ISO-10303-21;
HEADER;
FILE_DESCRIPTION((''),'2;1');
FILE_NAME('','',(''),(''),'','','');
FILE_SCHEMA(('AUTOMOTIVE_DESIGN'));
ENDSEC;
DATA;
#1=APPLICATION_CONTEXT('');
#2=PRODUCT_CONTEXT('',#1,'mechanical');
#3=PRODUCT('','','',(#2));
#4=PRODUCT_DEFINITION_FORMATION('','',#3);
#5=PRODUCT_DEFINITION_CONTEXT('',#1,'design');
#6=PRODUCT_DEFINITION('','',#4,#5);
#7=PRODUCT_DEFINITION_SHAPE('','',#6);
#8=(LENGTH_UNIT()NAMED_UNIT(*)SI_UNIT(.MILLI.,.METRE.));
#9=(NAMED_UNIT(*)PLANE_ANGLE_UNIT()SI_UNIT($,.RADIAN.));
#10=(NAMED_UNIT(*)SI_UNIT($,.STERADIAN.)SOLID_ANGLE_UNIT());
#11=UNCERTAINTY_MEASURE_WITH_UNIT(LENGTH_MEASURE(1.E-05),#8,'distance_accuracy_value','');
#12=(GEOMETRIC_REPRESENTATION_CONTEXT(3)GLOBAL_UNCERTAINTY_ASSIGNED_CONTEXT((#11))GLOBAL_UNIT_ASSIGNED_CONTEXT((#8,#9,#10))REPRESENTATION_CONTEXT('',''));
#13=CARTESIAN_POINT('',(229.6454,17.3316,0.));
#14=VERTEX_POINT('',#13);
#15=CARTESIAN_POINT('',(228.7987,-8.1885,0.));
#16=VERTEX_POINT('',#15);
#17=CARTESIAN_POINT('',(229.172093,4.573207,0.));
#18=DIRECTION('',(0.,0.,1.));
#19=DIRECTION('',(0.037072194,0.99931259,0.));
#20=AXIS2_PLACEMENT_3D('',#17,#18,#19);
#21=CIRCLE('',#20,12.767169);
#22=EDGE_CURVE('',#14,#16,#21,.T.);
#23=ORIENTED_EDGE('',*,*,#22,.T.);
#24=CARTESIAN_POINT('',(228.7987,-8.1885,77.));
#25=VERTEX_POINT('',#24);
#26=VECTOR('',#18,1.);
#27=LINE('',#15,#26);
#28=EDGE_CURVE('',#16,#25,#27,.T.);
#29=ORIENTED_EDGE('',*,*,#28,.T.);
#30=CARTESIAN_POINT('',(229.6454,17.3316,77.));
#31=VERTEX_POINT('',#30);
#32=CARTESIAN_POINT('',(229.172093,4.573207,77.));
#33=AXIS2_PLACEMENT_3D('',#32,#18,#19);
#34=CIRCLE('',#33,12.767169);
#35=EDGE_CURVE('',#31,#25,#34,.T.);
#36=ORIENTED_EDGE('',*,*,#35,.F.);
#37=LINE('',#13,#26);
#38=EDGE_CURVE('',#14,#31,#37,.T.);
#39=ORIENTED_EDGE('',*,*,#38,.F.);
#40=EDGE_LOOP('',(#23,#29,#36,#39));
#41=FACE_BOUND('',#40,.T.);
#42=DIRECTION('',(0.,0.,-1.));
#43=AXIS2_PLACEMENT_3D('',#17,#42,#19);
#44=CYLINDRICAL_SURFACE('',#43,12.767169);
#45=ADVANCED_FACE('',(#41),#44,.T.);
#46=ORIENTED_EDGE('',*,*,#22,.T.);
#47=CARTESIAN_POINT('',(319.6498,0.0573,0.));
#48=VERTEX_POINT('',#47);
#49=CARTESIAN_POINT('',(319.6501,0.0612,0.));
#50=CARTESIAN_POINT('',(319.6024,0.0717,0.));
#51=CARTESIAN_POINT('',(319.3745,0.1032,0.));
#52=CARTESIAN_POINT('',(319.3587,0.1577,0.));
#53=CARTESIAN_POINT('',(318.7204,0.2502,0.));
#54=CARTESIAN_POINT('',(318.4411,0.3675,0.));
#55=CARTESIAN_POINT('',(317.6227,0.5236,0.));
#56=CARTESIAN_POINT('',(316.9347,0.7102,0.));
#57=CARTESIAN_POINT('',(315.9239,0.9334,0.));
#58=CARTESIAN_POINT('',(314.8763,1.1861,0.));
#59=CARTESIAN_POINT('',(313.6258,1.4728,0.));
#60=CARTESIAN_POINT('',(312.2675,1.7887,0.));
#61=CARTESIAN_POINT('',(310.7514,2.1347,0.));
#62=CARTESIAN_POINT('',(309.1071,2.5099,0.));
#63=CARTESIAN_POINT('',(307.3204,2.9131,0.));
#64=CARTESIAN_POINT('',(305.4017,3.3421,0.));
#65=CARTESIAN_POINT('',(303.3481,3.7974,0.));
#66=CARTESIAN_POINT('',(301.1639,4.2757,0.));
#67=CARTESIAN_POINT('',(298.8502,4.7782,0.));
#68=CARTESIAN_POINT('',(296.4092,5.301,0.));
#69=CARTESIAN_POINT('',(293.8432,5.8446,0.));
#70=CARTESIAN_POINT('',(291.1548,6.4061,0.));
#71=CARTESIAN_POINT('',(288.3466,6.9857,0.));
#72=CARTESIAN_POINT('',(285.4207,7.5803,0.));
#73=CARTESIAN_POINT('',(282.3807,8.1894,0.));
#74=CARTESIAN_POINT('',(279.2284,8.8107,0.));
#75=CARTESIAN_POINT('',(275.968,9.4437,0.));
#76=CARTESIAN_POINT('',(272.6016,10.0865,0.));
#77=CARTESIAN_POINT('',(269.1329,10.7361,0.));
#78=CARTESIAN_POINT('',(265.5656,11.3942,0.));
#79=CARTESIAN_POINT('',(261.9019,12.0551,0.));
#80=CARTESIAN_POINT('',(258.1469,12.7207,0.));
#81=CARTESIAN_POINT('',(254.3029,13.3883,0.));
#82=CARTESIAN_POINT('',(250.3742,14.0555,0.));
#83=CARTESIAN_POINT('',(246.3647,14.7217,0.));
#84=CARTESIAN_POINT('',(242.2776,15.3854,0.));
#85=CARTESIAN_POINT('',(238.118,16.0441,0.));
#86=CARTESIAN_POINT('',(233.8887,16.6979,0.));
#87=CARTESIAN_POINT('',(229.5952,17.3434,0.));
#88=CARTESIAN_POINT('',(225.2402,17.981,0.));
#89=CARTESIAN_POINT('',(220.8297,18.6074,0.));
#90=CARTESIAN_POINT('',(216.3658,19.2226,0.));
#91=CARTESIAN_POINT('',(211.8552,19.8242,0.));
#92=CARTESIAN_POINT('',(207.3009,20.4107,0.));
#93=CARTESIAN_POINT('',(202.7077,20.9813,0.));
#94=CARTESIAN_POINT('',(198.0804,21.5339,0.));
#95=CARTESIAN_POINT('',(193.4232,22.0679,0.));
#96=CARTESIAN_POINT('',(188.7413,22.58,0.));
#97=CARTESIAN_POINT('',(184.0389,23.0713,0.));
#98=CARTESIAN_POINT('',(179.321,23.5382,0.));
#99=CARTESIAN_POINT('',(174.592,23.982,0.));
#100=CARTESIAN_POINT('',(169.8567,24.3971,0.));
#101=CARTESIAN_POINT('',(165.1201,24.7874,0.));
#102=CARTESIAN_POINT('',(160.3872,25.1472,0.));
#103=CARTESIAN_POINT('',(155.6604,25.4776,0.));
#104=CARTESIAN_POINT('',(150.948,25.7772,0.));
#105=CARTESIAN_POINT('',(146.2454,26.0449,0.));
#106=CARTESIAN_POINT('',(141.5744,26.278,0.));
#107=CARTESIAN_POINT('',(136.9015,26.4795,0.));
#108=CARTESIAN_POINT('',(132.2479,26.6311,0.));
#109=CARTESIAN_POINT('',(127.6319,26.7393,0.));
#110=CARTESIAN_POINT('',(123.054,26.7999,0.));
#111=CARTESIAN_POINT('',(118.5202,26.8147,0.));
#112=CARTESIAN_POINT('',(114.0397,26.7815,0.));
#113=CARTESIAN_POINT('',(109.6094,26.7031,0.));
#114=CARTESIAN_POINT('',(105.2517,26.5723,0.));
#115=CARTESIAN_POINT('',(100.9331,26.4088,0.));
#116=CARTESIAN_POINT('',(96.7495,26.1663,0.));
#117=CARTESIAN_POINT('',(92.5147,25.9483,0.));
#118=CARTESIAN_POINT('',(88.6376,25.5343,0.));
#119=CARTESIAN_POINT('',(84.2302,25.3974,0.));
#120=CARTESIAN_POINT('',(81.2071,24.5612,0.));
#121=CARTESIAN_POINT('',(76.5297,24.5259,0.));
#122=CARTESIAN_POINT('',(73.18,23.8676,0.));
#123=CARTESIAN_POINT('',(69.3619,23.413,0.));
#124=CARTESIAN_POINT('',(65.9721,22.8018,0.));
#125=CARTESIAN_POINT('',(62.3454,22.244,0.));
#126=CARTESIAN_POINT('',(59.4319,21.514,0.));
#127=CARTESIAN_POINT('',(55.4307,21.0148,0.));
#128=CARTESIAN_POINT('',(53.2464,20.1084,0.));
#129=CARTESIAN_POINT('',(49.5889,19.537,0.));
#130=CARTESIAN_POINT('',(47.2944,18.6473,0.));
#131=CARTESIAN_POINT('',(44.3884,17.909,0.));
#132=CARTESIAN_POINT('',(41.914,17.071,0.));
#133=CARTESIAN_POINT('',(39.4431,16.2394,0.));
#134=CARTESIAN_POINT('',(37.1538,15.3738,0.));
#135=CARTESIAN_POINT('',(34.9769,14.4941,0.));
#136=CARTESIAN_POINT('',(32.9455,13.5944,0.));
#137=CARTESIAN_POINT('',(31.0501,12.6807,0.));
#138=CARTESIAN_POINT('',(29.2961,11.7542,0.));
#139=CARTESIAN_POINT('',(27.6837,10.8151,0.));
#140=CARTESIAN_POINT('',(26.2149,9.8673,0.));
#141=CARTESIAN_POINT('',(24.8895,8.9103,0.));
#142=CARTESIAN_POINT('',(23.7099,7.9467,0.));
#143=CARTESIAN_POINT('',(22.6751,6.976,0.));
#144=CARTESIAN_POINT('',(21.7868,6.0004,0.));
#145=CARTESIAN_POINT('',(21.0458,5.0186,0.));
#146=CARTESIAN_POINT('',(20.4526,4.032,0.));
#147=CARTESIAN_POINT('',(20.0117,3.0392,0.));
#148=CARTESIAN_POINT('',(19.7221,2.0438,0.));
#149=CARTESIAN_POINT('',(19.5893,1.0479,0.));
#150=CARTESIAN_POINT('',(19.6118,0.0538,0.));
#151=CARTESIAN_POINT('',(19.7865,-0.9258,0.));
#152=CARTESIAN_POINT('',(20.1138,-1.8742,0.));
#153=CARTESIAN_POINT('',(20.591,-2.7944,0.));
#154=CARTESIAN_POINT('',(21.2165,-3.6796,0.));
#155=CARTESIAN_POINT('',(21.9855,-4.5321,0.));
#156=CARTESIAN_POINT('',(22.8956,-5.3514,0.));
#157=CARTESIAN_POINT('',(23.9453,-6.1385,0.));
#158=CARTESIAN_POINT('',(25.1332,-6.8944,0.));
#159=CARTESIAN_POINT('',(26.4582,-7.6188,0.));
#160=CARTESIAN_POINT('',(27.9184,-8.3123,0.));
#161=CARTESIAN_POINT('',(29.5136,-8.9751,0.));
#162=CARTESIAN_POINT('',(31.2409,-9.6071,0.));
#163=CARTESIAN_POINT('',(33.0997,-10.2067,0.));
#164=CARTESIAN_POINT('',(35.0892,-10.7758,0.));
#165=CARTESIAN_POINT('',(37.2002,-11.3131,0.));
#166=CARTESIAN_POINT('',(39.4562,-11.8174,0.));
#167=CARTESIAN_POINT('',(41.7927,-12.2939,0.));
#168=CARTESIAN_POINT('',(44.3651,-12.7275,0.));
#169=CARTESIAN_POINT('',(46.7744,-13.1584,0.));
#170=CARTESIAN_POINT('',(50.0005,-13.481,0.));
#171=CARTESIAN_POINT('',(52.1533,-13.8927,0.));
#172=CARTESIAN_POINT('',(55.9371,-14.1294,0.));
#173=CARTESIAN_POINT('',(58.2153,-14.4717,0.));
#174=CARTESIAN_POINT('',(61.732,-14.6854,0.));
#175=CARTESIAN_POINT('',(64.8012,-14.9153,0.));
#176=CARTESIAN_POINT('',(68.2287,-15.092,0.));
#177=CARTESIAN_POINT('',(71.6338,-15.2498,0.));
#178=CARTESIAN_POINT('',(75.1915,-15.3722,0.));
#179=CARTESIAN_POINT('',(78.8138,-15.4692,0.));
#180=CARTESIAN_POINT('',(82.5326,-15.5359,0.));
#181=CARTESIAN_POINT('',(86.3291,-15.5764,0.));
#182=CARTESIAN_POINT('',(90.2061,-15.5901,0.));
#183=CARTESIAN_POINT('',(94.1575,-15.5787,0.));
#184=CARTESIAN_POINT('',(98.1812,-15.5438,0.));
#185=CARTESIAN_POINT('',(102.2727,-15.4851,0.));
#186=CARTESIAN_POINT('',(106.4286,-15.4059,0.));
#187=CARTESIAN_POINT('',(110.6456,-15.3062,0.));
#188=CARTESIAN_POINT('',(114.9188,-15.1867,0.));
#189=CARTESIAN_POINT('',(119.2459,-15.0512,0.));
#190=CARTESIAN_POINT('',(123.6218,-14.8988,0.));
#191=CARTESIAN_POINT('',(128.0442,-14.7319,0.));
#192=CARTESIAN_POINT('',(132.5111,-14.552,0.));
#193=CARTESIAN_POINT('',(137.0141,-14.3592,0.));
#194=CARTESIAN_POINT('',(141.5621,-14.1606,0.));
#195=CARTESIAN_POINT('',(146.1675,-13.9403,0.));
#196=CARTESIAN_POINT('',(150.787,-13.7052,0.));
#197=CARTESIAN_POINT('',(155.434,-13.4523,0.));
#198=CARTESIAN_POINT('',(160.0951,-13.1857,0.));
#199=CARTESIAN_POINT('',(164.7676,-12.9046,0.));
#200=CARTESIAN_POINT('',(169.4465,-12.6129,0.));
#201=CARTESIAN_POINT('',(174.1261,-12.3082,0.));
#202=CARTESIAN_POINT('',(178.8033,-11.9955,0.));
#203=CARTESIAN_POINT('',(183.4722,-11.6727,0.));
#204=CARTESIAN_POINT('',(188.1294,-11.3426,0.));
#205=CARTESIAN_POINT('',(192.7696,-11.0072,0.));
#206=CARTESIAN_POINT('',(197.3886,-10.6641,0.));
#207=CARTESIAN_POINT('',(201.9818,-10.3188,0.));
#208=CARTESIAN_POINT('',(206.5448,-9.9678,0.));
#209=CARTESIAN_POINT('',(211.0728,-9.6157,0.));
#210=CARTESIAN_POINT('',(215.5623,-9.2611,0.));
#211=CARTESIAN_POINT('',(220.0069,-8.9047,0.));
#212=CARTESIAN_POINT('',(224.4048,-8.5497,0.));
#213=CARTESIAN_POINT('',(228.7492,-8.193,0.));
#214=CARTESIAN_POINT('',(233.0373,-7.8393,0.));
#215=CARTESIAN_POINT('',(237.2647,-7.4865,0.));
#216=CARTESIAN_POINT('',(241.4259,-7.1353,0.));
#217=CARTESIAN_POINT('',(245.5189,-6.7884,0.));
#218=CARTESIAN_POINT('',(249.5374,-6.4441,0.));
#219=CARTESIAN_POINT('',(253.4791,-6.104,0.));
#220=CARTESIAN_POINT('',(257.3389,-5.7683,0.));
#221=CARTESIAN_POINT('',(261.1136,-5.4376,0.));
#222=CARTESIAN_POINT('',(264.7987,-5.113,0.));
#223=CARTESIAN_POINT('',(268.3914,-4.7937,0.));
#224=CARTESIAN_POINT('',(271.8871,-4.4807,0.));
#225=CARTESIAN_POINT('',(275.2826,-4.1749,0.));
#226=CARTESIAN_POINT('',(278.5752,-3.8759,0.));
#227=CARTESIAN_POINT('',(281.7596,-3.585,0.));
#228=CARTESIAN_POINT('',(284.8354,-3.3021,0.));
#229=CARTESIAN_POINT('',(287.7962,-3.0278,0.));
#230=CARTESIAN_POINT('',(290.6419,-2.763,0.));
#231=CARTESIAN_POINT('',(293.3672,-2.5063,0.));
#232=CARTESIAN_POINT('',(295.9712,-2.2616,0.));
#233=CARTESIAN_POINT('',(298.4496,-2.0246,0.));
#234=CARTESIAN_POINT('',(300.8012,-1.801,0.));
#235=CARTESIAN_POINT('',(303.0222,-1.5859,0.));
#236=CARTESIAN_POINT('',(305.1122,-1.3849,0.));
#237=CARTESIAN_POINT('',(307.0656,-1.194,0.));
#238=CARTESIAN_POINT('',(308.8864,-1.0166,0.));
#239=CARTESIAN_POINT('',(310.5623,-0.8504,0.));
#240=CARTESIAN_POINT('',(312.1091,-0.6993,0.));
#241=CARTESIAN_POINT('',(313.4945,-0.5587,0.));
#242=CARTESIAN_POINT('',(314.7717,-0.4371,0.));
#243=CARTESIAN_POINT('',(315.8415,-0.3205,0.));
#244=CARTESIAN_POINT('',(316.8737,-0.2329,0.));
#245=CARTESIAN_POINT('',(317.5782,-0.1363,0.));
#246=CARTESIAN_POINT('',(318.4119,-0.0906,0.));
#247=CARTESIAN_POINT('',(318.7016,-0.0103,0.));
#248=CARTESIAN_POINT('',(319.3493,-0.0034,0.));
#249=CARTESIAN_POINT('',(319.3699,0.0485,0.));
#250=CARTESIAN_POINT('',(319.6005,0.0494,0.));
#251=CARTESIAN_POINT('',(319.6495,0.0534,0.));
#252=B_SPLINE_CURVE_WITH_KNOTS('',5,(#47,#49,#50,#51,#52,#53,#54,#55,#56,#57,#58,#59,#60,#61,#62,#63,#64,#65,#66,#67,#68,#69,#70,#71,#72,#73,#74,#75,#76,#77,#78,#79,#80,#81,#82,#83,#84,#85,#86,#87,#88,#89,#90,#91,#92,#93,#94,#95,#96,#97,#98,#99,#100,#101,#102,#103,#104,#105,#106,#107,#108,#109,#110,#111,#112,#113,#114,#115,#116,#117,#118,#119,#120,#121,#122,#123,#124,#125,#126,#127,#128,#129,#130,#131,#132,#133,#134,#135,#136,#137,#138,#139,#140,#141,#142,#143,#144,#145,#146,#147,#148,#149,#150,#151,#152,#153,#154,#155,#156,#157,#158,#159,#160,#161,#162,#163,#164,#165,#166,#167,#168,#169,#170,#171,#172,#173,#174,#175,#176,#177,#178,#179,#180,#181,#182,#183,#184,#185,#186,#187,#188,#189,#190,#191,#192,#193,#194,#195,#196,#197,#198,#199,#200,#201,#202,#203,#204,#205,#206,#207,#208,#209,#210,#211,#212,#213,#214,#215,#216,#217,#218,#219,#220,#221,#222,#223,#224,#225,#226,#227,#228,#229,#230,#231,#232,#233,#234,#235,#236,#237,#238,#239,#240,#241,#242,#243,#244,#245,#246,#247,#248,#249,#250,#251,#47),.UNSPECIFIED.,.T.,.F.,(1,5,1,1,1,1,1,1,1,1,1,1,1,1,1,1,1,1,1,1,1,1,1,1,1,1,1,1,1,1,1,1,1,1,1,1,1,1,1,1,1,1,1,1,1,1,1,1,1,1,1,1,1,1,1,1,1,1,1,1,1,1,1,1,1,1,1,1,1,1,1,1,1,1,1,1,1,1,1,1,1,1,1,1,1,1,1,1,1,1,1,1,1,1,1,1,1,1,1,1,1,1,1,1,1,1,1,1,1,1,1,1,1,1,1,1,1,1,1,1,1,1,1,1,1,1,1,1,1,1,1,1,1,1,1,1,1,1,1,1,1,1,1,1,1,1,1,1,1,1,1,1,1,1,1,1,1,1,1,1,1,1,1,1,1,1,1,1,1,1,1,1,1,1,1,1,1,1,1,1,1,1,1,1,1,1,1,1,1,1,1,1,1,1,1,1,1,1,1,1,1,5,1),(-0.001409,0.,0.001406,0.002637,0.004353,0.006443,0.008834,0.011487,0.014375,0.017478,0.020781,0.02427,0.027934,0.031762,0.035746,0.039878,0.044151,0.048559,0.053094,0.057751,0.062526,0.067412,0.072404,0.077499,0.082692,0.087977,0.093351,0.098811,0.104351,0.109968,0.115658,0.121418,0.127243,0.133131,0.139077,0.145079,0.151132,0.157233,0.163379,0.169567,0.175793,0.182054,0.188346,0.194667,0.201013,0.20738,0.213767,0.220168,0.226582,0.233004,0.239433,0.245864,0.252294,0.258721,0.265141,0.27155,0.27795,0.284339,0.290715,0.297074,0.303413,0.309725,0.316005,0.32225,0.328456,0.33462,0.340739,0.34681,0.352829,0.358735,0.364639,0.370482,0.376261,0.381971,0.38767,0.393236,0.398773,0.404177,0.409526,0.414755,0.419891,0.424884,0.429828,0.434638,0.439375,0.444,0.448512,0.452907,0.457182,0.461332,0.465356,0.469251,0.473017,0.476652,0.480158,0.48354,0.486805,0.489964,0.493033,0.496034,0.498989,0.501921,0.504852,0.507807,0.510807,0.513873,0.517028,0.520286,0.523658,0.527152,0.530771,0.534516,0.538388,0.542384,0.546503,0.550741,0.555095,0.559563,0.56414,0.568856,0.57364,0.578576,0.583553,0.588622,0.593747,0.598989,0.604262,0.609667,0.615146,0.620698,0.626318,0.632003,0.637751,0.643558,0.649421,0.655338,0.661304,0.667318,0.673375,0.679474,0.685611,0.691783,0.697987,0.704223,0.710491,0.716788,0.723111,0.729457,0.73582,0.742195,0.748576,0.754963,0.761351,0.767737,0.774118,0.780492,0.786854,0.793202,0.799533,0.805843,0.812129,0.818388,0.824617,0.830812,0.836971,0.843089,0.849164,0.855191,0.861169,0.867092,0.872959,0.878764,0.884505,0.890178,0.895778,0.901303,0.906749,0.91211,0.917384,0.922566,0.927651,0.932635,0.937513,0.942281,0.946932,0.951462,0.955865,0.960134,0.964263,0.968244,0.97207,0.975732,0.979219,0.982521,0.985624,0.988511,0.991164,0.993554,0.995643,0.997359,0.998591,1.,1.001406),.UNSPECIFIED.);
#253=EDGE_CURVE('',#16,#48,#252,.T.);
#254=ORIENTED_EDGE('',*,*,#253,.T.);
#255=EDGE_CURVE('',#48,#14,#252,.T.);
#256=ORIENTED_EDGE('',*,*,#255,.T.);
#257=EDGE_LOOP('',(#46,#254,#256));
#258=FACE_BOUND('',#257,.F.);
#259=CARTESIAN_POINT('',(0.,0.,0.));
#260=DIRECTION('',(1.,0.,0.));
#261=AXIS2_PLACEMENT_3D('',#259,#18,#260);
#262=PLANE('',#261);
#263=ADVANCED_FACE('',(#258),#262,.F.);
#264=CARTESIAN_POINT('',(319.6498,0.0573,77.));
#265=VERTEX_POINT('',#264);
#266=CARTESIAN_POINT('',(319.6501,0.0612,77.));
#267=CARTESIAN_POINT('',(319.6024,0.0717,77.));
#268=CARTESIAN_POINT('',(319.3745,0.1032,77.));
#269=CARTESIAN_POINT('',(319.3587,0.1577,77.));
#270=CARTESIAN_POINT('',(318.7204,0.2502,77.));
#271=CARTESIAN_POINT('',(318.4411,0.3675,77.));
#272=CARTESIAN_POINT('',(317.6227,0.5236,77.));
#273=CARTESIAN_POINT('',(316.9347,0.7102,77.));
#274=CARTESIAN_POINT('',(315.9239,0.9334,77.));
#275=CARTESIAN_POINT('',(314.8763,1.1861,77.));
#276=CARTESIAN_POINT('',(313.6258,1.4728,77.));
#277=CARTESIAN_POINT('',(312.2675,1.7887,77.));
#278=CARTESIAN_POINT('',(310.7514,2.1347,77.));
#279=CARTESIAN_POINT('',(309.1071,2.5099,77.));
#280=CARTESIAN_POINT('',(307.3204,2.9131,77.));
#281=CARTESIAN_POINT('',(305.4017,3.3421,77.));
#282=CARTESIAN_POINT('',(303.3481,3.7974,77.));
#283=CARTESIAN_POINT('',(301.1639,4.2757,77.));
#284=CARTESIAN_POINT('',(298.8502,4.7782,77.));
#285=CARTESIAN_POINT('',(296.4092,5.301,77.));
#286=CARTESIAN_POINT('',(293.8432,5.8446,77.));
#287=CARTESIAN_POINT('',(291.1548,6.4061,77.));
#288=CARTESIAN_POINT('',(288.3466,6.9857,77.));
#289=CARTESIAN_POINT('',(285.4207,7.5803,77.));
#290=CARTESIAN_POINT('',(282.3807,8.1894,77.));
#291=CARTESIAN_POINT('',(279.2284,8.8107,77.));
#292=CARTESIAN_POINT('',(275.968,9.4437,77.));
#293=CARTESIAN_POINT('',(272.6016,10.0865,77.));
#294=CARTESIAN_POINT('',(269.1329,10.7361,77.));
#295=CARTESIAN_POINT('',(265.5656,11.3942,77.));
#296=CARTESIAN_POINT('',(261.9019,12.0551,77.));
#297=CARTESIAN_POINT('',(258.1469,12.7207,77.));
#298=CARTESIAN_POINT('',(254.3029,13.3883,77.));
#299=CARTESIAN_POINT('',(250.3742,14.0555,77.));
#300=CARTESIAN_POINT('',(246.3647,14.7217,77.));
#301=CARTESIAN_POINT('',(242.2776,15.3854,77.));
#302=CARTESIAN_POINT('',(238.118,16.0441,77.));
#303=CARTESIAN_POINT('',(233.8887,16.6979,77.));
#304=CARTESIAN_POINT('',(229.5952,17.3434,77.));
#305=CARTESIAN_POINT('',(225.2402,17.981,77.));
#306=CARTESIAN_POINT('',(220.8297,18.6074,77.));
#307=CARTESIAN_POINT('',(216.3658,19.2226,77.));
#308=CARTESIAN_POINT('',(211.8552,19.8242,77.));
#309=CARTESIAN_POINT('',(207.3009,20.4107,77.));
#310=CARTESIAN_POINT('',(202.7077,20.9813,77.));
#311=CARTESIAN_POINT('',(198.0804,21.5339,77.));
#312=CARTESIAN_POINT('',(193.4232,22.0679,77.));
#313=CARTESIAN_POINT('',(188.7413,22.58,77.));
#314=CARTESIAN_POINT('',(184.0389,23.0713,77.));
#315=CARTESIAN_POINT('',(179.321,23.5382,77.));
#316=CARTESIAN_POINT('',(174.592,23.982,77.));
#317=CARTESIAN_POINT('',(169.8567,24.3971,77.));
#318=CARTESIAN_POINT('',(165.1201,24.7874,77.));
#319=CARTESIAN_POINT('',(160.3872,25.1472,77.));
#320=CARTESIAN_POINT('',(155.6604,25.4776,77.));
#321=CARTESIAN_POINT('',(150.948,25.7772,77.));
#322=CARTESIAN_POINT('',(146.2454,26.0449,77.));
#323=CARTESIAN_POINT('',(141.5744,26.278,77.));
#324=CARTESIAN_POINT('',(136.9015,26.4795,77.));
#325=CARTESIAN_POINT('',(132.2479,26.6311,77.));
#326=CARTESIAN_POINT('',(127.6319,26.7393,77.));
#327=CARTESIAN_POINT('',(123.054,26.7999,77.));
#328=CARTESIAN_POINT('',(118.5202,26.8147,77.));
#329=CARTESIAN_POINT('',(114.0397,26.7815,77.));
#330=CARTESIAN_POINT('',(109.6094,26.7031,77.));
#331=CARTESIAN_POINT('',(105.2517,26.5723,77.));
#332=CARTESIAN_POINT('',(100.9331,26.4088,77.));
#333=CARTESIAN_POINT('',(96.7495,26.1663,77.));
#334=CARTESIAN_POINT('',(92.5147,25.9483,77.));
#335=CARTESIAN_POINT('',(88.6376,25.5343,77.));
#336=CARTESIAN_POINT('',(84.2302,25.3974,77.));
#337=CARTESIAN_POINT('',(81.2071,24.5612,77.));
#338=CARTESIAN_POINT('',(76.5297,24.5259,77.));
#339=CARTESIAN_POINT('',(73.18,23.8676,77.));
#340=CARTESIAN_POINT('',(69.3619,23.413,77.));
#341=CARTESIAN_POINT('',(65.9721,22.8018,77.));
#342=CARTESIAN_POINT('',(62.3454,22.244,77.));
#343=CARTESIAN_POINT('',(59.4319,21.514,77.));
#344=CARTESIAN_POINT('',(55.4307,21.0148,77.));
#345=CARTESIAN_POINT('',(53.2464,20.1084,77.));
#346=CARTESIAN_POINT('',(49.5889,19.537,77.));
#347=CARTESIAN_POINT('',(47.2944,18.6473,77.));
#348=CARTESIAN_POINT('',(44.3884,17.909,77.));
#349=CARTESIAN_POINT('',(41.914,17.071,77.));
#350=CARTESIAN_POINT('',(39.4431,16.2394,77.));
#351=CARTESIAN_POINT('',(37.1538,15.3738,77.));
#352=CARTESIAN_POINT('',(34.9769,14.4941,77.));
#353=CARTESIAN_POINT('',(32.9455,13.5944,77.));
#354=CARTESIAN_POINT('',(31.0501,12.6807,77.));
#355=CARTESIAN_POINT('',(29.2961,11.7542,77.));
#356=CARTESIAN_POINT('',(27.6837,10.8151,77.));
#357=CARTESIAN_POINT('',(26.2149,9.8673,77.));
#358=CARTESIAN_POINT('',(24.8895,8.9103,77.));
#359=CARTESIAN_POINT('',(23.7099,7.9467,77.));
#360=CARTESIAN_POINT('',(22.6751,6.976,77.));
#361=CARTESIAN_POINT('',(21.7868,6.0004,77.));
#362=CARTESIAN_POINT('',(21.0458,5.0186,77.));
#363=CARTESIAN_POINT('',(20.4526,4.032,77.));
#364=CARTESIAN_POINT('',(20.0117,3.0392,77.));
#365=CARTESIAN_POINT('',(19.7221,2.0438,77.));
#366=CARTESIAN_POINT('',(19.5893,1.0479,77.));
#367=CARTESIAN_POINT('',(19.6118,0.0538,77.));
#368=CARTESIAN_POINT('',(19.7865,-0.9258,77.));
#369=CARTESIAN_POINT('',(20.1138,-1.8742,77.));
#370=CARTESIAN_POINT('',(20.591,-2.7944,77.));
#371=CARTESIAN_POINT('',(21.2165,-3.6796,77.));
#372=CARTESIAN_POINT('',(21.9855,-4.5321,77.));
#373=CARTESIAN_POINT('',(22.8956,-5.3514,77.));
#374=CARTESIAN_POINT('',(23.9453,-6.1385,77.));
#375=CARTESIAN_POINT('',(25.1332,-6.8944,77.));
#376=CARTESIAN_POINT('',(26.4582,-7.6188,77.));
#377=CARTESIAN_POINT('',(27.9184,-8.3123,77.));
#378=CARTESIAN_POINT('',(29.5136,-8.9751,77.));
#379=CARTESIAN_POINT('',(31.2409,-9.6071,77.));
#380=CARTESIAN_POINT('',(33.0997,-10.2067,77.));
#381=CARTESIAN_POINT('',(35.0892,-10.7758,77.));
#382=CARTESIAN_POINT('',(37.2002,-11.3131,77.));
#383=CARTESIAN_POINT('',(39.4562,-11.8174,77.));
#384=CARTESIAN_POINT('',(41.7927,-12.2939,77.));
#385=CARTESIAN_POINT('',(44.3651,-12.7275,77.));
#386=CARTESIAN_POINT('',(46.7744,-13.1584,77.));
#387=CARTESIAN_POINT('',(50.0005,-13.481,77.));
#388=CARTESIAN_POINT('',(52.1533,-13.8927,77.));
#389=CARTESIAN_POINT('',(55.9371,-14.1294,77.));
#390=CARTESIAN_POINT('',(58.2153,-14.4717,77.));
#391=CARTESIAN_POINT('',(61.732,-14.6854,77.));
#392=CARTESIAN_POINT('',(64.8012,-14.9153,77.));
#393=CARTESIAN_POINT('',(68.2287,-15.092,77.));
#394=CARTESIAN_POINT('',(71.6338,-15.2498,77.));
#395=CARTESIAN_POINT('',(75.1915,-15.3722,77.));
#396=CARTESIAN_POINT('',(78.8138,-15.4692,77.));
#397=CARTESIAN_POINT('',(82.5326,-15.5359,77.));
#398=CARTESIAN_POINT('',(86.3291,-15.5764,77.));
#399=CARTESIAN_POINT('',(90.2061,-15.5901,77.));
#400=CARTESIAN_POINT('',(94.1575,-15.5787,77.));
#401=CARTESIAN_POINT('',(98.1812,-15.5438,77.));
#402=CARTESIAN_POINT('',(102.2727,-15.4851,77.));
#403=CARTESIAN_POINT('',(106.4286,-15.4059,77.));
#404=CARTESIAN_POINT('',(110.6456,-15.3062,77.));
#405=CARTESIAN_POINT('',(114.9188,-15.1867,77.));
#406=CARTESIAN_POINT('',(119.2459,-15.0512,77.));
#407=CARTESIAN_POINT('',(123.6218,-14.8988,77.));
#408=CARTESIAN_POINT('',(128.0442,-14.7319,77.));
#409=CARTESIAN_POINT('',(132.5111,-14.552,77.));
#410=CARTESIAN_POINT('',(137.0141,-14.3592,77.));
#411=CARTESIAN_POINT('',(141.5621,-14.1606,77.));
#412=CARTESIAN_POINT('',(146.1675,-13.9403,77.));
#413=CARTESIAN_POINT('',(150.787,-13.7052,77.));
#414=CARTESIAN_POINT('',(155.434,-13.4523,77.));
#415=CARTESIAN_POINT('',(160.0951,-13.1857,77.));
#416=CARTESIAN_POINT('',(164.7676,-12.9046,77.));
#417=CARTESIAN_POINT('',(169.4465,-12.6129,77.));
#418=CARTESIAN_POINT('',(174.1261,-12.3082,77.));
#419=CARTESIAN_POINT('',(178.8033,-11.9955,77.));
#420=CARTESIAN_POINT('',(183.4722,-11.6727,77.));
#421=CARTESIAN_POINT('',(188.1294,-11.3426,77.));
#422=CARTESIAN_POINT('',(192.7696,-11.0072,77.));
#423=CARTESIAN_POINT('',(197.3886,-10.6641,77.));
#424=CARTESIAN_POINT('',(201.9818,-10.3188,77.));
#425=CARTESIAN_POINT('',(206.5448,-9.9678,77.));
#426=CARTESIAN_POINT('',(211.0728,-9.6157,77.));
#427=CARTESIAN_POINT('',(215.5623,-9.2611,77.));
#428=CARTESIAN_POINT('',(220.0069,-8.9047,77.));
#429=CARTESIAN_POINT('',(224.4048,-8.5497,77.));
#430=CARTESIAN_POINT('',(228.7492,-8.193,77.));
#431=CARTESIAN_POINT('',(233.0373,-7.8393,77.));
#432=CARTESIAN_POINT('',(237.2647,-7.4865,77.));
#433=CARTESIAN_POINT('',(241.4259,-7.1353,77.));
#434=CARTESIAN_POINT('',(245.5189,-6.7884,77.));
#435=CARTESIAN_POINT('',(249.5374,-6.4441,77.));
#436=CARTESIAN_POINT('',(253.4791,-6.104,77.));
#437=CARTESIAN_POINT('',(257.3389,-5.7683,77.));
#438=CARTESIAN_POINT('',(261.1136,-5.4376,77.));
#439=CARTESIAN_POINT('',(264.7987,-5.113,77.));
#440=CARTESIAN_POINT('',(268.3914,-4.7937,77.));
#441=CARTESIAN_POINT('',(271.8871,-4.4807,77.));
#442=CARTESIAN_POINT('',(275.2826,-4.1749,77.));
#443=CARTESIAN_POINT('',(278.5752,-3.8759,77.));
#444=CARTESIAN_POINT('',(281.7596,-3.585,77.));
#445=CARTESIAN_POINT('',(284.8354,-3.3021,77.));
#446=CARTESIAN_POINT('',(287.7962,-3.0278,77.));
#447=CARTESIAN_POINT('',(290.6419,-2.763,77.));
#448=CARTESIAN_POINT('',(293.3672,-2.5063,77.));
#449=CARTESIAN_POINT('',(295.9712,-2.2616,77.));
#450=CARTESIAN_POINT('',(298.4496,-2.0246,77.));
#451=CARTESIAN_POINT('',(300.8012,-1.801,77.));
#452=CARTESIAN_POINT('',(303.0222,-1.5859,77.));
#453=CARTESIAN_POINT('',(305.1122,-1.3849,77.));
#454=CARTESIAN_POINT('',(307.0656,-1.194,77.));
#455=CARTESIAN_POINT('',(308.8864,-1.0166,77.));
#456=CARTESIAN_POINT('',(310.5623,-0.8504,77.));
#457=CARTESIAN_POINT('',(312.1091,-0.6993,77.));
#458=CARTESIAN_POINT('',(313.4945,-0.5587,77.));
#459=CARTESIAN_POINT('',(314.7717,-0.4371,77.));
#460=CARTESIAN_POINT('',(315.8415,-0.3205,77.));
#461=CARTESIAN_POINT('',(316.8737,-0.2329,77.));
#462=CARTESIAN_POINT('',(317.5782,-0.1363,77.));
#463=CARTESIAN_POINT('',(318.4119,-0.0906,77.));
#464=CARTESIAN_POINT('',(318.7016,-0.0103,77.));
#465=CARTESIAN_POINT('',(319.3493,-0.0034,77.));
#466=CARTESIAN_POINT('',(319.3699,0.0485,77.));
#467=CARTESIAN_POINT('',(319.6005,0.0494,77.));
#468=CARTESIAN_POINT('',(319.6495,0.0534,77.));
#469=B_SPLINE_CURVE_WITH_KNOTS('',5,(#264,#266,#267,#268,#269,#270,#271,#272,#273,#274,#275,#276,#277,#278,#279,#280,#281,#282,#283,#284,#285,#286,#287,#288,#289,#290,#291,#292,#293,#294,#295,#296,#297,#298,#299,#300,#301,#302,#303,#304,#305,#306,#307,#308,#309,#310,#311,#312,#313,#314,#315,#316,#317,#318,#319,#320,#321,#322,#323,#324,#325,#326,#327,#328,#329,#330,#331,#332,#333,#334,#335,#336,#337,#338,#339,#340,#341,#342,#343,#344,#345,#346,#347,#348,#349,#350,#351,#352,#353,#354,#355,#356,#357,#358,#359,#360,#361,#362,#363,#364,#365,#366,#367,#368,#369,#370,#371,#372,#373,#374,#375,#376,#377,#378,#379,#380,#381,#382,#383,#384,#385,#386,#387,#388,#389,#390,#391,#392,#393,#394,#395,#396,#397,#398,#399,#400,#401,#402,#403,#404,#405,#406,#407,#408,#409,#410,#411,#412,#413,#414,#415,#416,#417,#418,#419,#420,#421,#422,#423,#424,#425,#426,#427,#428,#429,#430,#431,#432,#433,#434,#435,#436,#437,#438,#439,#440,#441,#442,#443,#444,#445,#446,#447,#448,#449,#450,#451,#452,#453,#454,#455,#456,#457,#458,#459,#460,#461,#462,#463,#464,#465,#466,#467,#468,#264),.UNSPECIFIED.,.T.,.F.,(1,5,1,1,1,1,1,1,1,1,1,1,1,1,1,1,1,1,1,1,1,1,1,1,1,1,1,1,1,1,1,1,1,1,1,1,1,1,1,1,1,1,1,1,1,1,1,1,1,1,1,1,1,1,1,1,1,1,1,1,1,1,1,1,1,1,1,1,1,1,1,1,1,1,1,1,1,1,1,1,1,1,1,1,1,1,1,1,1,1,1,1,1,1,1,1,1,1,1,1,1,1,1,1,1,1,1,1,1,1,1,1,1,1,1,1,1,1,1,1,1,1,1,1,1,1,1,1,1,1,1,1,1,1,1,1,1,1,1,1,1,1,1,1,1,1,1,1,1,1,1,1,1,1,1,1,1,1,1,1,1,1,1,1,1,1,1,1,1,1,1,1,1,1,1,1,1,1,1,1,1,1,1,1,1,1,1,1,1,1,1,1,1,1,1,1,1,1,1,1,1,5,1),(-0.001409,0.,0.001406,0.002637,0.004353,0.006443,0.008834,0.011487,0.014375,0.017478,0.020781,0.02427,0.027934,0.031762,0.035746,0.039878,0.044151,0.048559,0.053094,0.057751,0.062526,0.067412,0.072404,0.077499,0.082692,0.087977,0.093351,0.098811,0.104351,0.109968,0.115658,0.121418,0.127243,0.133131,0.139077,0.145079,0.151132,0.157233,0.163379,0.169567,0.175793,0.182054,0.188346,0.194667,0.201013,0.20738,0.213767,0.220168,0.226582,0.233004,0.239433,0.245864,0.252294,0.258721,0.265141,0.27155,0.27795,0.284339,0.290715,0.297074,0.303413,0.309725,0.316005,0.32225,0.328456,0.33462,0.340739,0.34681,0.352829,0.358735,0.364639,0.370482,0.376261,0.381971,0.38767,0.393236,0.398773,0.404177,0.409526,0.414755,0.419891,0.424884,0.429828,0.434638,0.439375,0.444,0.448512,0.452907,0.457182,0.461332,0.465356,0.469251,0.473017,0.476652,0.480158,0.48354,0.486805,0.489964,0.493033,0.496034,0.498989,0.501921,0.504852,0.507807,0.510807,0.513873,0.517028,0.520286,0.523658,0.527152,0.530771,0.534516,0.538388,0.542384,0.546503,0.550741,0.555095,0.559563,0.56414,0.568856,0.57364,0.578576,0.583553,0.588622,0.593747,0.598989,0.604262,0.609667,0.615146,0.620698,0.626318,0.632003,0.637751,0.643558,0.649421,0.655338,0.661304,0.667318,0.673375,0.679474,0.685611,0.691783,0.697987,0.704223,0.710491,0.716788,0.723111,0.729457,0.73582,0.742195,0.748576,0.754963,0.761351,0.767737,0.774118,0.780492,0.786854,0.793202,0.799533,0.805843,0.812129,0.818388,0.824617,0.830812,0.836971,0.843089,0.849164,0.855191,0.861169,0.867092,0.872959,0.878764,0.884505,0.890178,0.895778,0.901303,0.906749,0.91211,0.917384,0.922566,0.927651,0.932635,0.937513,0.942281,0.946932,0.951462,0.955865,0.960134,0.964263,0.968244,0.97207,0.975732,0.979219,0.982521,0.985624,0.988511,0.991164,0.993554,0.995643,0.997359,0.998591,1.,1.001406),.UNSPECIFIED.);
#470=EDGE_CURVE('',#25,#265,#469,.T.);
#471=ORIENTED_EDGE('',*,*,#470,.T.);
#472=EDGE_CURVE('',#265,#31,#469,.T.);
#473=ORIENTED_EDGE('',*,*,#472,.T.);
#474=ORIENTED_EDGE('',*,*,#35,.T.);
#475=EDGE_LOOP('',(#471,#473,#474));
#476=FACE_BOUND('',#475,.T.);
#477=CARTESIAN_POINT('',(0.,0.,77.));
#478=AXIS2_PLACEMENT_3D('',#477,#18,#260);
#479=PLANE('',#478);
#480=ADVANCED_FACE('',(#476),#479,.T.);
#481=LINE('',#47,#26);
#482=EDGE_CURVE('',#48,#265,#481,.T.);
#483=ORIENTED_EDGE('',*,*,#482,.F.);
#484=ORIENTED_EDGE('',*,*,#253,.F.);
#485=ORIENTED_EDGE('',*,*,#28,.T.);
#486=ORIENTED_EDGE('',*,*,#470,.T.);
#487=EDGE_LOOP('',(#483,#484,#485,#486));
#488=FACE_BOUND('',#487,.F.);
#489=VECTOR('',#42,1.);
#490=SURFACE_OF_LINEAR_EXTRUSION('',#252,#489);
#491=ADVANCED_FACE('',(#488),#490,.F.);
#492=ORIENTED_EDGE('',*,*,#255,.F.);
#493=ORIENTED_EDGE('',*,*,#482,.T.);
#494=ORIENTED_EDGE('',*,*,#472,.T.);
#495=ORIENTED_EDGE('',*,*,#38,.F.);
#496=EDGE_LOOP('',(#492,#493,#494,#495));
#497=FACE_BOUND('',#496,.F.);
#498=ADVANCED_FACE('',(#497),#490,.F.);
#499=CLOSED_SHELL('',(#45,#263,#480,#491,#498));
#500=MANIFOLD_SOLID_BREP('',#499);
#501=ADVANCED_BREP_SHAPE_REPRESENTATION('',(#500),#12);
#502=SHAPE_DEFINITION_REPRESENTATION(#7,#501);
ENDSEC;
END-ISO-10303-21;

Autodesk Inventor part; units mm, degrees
ref_plane "YZ Plane" through (0, 0, 0) normal (1, 0, 0) x (0, 1, 0)
ref_plane "XZ Plane" through (0, 0, 0) normal (0, 1, 0) x (-1, 0, 0)
ref_plane "XY Plane" through (0, 0, 0) normal (0, 0, 1) x (1, 0, 0)
sketch "Sketch2" plane through (0, 0, 0) normal (0, 0, 1) x (1, 0, 0)
  spline S0 degree 5 poles (319.6498, 0.0573) (319.6501, 0.0612) (319.6024, 0.0717) (319.3745, 0.1032) (319.3587, 0.1577) (318.7204, 0.2502) (318.4411, 0.3675) (317.6227, 0.5236) (316.9347, 0.7102) (315.9239, 0.9334) (314.8763, 1.1861) (313.6258, 1.4728) (312.2675, 1.7887) (310.7514, 2.1347) (309.1071, 2.5099) (307.3204, 2.9131) (305.4017, 3.3421) (303.3481, 3.7974) (301.1639, 4.2757) (298.8502, 4.7782) (296.4092, 5.301) (293.8432, 5.8446) (291.1548, 6.4061) (288.3466, 6.9857) (285.4207, 7.5803) (282.3807, 8.1894) (279.2284, 8.8107) (275.968, 9.4437) (272.6016, 10.0865) (269.1329, 10.7361) (265.5656, 11.3942) (261.9019, 12.0551) (258.1469, 12.7207) (254.3029, 13.3883) (250.3742, 14.0555) (246.3647, 14.7217) (242.2776, 15.3854) (238.118, 16.0441) (233.8887, 16.6979) (229.5952, 17.3434) (225.2402, 17.981) (220.8297, 18.6074) (216.3658, 19.2226) (211.8552, 19.8242) (207.3009, 20.4107) (202.7077, 20.9813) (198.0804, 21.5339) (193.4232, 22.0679) (188.7413, 22.58) (184.0389, 23.0713) (179.321, 23.5382) (174.592, 23.982) (169.8567, 24.3971) (165.1201, 24.7874) (160.3872, 25.1472) (155.6604, 25.4776) (150.948, 25.7772) (146.2454, 26.0449) (141.5744, 26.278) (136.9015, 26.4795) (132.2479, 26.6311) (127.6319, 26.7393) (123.054, 26.7999) (118.5202, 26.8147) (114.0397, 26.7815) (109.6094, 26.7031) (105.2517, 26.5723) (100.9331, 26.4088) (96.7495, 26.1663) (92.5147, 25.9483) (88.6376, 25.5343) (84.2302, 25.3974) (81.2071, 24.5612) (76.5297, 24.5259) (73.18, 23.8676) (69.3619, 23.413) (65.9721, 22.8018) (62.3454, 22.244) (59.4319, 21.514) (55.4307, 21.0148) (53.2464, 20.1084) (49.5889, 19.537) (47.2944, 18.6473) (44.3884, 17.909) (41.914, 17.071) (39.4431, 16.2394) (37.1538, 15.3738) (34.9769, 14.4941) (32.9455, 13.5944) (31.0501, 12.6807) (29.2961, 11.7542) (27.6837, 10.8151) (26.2149, 9.8673) (24.8895, 8.9103) (23.7099, 7.9467) (22.6751, 6.976) (21.7868, 6.0004) (21.0458, 5.0186) (20.4526, 4.032) (20.0117, 3.0392) (19.7221, 2.0438) (19.5893, 1.0479) (19.6118, 0.0538) (19.7865, -0.9258) (20.1138, -1.8742) (20.591, -2.7944) (21.2165, -3.6796) (21.9855, -4.5321) (22.8956, -5.3514) (23.9453, -6.1385) (25.1332, -6.8944) (26.4582, -7.6188) (27.9184, -8.3123) (29.5136, -8.9751) (31.2409, -9.6071) (33.0997, -10.2067) (35.0892, -10.7758) (37.2002, -11.3131) (39.4562, -11.8174) (41.7927, -12.2939) (44.3651, -12.7275) (46.7744, -13.1584) (50.0005, -13.481) (52.1533, -13.8927) (55.9371, -14.1294) (58.2153, -14.4717) (61.732, -14.6854) (64.8012, -14.9153) (68.2287, -15.092) (71.6338, -15.2498) (75.1915, -15.3722) (78.8138, -15.4692) (82.5326, -15.5359) (86.3291, -15.5764) (90.2061, -15.5901) (94.1575, -15.5787) (98.1812, -15.5438) (102.2727, -15.4851) (106.4286, -15.4059) (110.6456, -15.3062) (114.9188, -15.1867) (119.2459, -15.0512) (123.6218, -14.8988) (128.0442, -14.7319) (132.5111, -14.552) (137.0141, -14.3592) (141.5621, -14.1606) (146.1675, -13.9403) (150.787, -13.7052) (155.434, -13.4523) (160.0951, -13.1857) (164.7676, -12.9046) (169.4465, -12.6129) (174.1261, -12.3082) (178.8033, -11.9955) (183.4722, -11.6727) (188.1294, -11.3426) (192.7696, -11.0072) (197.3886, -10.6641) (201.9818, -10.3188) (206.5448, -9.9678) (211.0728, -9.6157) (215.5623, -9.2611) (220.0069, -8.9047) (224.4048, -8.5497) (228.7492, -8.193) (233.0373, -7.8393) (237.2647, -7.4865) (241.4259, -7.1353) (245.5189, -6.7884) (249.5374, -6.4441) (253.4791, -6.104) (257.3389, -5.7683) (261.1136, -5.4376) (264.7987, -5.113) (268.3914, -4.7937) (271.8871, -4.4807) (275.2826, -4.1749) (278.5752, -3.8759) (281.7596, -3.585) (284.8354, -3.3021) (287.7962, -3.0278) (290.6419, -2.763) (293.3672, -2.5063) (295.9712, -2.2616) (298.4496, -2.0246) (300.8012, -1.801) (303.0222, -1.5859) (305.1122, -1.3849) (307.0656, -1.194) (308.8864, -1.0166) (310.5623, -0.8504) (312.1091, -0.6993) (313.4945, -0.5587) (314.7717, -0.4371) (315.8415, -0.3205) (316.8737, -0.2329) (317.5782, -0.1363) (318.4119, -0.0906) (318.7016, -0.0103) (319.3493, -0.0034) (319.3699, 0.0485) (319.6005, 0.0494) (319.6495, 0.0534) (319.6498, 0.0573) knots 0 0 0 0 0 0 0.001406 0.002637 0.004353 0.006443 0.008834 0.011487 0.014375 0.017478 0.020781 0.02427 0.027934 0.031762 0.035746 0.039878 0.044151 0.048559 0.053094 0.057751 0.062526 0.067412 0.072404 0.077499 0.082692 0.087977 0.093351 0.098811 0.104351 0.109968 0.115658 0.121418 0.127243 0.133131 0.139077 0.145079 0.151132 0.157233 0.163379 0.169567 0.175793 0.182054 0.188346 0.194667 0.201013 0.20738 0.213767 0.220168 0.226582 0.233004 0.239433 0.245864 0.252294 0.258721 0.265141 0.27155 0.27795 0.284339 0.290715 0.297074 0.303413 0.309725 0.316005 0.32225 0.328456 0.33462 0.340739 0.34681 0.352829 0.358735 0.364639 0.370482 0.376261 0.381971 0.38767 0.393236 0.398773 0.404177 0.409526 0.414755 0.419891 0.424884 0.429828 0.434638 0.439375 0.444 0.448512 0.452907 0.457182 0.461332 0.465356 0.469251 0.473017 0.476652 0.480158 0.48354 0.486805 0.489964 0.493033 0.496034 0.498989 0.501921 0.504852 0.507807 0.510807 0.513873 0.517028 0.520286 0.523658 0.527152 0.530771 0.534516 0.538388 0.542384 0.546503 0.550741 0.555095 0.559563 0.56414 0.568856 0.57364 0.578576 0.583553 0.588622 0.593747 0.598989 0.604262 0.609667 0.615146 0.620698 0.626318 0.632003 0.637751 0.643558 0.649421 0.655338 0.661304 0.667318 0.673375 0.679474 0.685611 0.691783 0.697987 0.704223 0.710491 0.716788 0.723111 0.729457 0.73582 0.742195 0.748576 0.754963 0.761351 0.767737 0.774118 0.780492 0.786854 0.793202 0.799533 0.805843 0.812129 0.818388 0.824617 0.830812 0.836971 0.843089 0.849164 0.855191 0.861169 0.867092 0.872959 0.878764 0.884505 0.890178 0.895778 0.901303 0.906749 0.91211 0.917384 0.922566 0.927651 0.932635 0.937513 0.942281 0.946932 0.951462 0.955865 0.960134 0.964263 0.968244 0.97207 0.975732 0.979219 0.982521 0.985624 0.988511 0.991164 0.993554 0.995643 0.997359 0.998591 1 1 1 1 1 1
  circle A0 centre (83.0595, 4.5678) radius 11.5675
  line L0 (83.0595, 4.5678) -> (83.0595, 25.0384) construction
  line L1 (83.0595, 4.5678) -> (209.6498, 4.5678) construction
  line L2 (319.6498, 0.0573) -> (219.6498, 0.0573) construction
  line L3 (219.6499, 18.7671) -> (219.6499, -8.9327) construction
  line L4 (28.0055, 4.5054) -> (28.0055, -2.4946)
  line L5 (19.627, 1.0326) -> (319.6498, 0.0573) construction
  line L6 (49.7105, 14.4213) -> (55.6079, 14.4213)
  line L7 (49.7104, -8.4915) -> (55.6078, -8.4915)
  line L8 (28.0055, 4.5054) -> (49.7105, 14.4213)
  line L9 (28.0055, -2.4946) -> (49.7104, -8.4915)
  line L10 (55.6079, 14.4213) -> (55.6079, 20.8726)
  line L11 (55.6078, -8.4915) -> (55.6078, -14.1513)
  line L12 (108.6496, 16.3299) -> (108.6496, -7.1942)
  line L13 (110.8735, -9.1817) -> (193.8736, 0.1678)
  line L14 (195.6498, 2.1552) -> (195.6498, 6.9805)
  line L15 (193.8736, 8.9679) -> (110.8735, 18.3173)
  arc A1 (110.8735, 18.3173) -> (108.6496, 16.3299) centre (110.6496, 16.3299) ccw
  arc A2 (108.6496, -7.1942) -> (110.8735, -9.1817) centre (110.6496, -7.1942) ccw
  arc A3 (193.8736, 0.1678) -> (195.6498, 2.1552) centre (193.6498, 2.1552) ccw
  arc A4 (195.6498, 6.9805) -> (193.8736, 8.9679) centre (193.6498, 6.9805) ccw
  circle A5 centre (209.6498, 0.0573) radius 6.25
  arc A6 (229.6454, 17.3316) -> (228.7987, -8.1885) centre (229.1721, 4.5732) ccw
  point P0 (0, 0)
  point P1 (319.3573, 0.1272)
  point P2 (318.9918, 0.2142)
  point P3 (318.4802, 0.3354)
  point P4 (317.8238, 0.4911)
  point P5 (317.0222, 0.6801)
  point P6 (316.0769, 0.9024)
  point P7 (314.9885, 1.1568)
  point P8 (313.7582, 1.443)
  point P9 (312.3866, 1.7598)
  point P10 (310.8752, 2.1063)
  point P11 (309.2258, 2.4819)
  point P12 (307.4393, 2.8854)
  point P13 (305.5178, 3.3153)
  point P14 (303.4628, 3.7707)
  point P15 (301.2764, 4.2501)
  point P16 (298.9607, 4.7526)
  point P17 (296.5175, 5.2764)
  point P18 (293.9492, 5.8203)
  point P19 (291.2585, 6.3828)
  point P20 (288.4478, 6.9627)
  point P21 (285.5195, 7.5582)
  point P22 (282.4766, 8.1678)
  point P23 (279.3218, 8.79)
  point P24 (276.0584, 9.4236)
  point P25 (272.6891, 10.0668)
  point P26 (269.2175, 10.7178)
  point P27 (265.6469, 11.3757)
  point P28 (261.9803, 12.0381)
  point P29 (258.2219, 12.7041)
  point P30 (254.3747, 13.3722)
  point P31 (250.4426, 14.0403)
  point P32 (246.4295, 14.7072)
  point P33 (242.339, 15.3714)
  point P34 (238.1756, 16.0311)
  point P35 (233.9428, 16.6851)
  point P36 (225.2869, 17.9694)
  point P37 (220.8723, 18.5967)
  point P38 (216.4049, 19.2123)
  point P39 (211.8901, 19.8144)
  point P40 (207.332, 20.4015)
  point P41 (202.7347, 20.9724)
  point P42 (198.1034, 21.5256)
  point P43 (193.4423, 22.0596)
  point P44 (188.7563, 22.5726)
  point P45 (184.0499, 23.0637)
  point P46 (179.3279, 23.5314)
  point P47 (174.5948, 23.9745)
  point P48 (169.8554, 24.3909)
  point P49 (165.1148, 24.7803)
  point P50 (160.3775, 25.1406)
  point P51 (155.6479, 25.4709)
  point P52 (150.9316, 25.7703)
  point P53 (146.233, 26.0373)
  point P54 (141.557, 26.2707)
  point P55 (136.882, 26.4681)
  point P56 (132.2209, 26.6211)
  point P57 (127.5964, 26.7282)
  point P58 (123.0133, 26.7888)
  point P59 (118.4761, 26.8026)
  point P60 (113.9902, 26.7693)
  point P61 (109.5601, 26.6886)
  point P62 (105.191, 26.5611)
  point P63 (100.8866, 26.3866)
  point P64 (96.6524, 26.1647)
  point P65 (92.4927, 25.8975)
  point P66 (88.4121, 25.5832)
  point P67 (84.4152, 25.2282)
  point P68 (80.9052, 24.7441)
  point P69 (76.6873, 24.3761)
  point P70 (72.9635, 23.8905)
  point P71 (69.3402, 23.3611)
  point P72 (65.8208, 22.7938)
  point P73 (62.4086, 22.1883)
  point P74 (59.107, 21.5464)
  point P75 (52.8493, 20.1606)
  point P76 (49.7105, 19.4213)
  point P77 (47.0737, 18.6507)
  point P78 (44.3741, 17.8542)
  point P79 (41.8034, 17.0322)
  point P80 (39.3638, 16.1874)
  point P81 (37.0583, 15.3213)
  point P82 (34.8884, 14.4363)
  point P83 (32.8568, 13.534)
  point P84 (30.965, 12.6166)
  point P85 (29.2145, 11.686)
  point P86 (27.6071, 10.7437)
  point P87 (26.1443, 9.7921)
  point P88 (24.8269, 8.8324)
  point P89 (23.6566, 7.8664)
  point P90 (22.6336, 6.8953)
  point P91 (21.7591, 5.9209)
  point P92 (21.0334, 4.9441)
  point P93 (20.4571, 3.9661)
  point P94 (20.0308, 2.9875)
  point P95 (19.7539, 2.0098)
  point P96 (19.6496, 0.0573)
  point P97 (19.8205, -0.9033)
  point P98 (20.1376, -1.8357)
  point P99 (20.6002, -2.7402)
  point P100 (21.208, -3.6159)
  point P101 (21.9598, -4.4628)
  point P102 (22.8544, -5.2806)
  point P103 (23.8909, -6.069)
  point P104 (25.0681, -6.8277)
  point P105 (26.3846, -7.5561)
  point P106 (27.8384, -8.2539)
  point P107 (29.4284, -8.9211)
  point P108 (31.1522, -9.5571)
  point P109 (33.0086, -10.1613)
  point P110 (34.9949, -10.734)
  point P111 (37.1093, -11.2746)
  point P112 (39.3497, -11.7828)
  point P113 (41.7134, -12.2586)
  point P114 (44.198, -12.702)
  point P115 (46.8014, -13.1127)
  point P116 (49.7104, -13.4915)
  point P117 (52.3532, -13.8357)
  point P118 (58.3469, -14.4294)
  point P119 (61.5023, -14.6781)
  point P120 (64.7591, -14.8953)
  point P121 (68.1149, -15.0813)
  point P122 (71.5661, -15.237)
  point P123 (75.1094, -15.3627)
  point P124 (78.7418, -15.4596)
  point P125 (82.46, -15.528)
  point P126 (86.2607, -15.5691)
  point P127 (90.14, -15.5838)
  point P128 (94.0946, -15.5733)
  point P129 (98.1212, -15.5388)
  point P130 (102.2159, -15.4812)
  point P131 (106.3751, -15.4023)
  point P132 (110.5952, -15.303)
  point P133 (114.872, -15.1845)
  point P134 (119.2022, -15.0489)
  point P135 (123.5813, -14.8971)
  point P136 (128.006, -14.7306)
  point P137 (132.4718, -14.5509)
  point P138 (136.9748, -14.3598)
  point P139 (141.5285, -14.1576)
  point P140 (146.1365, -13.9383)
  point P141 (150.7679, -13.7022)
  point P142 (155.4191, -13.4499)
  point P143 (160.0853, -13.1829)
  point P144 (164.7617, -12.9024)
  point P145 (169.4444, -12.6099)
  point P146 (174.1283, -12.306)
  point P147 (178.8092, -11.9925)
  point P148 (183.4823, -11.67)
  point P149 (188.1434, -11.34)
  point P150 (192.7877, -11.0037)
  point P151 (197.4106, -10.6614)
  point P152 (202.0079, -10.3149)
  point P153 (206.5747, -9.9645)
  point P154 (211.1069, -9.6117)
  point P155 (215.5999, -9.2568)
  point P156 (220.0489, -8.9007)
  point P157 (224.4503, -8.5446)
  point P158 (233.0906, -7.8339)
  point P159 (237.3214, -7.4808)
  point P160 (241.4866, -7.1298)
  point P161 (245.5828, -6.7821)
  point P162 (249.6052, -6.4377)
  point P163 (253.5502, -6.0972)
  point P164 (257.4136, -5.7612)
  point P165 (261.1915, -5.4303)
  point P166 (264.88, -5.1051)
  point P167 (268.4758, -4.7856)
  point P168 (271.9747, -4.4724)
  point P169 (275.3734, -4.1661)
  point P170 (278.6686, -3.867)
  point P171 (281.8564, -3.5757)
  point P172 (284.9344, -3.2925)
  point P173 (287.8984, -3.018)
  point P174 (290.7463, -2.7525)
  point P175 (293.4745, -2.4963)
  point P176 (296.0806, -2.2503)
  point P177 (298.5616, -2.0142)
  point P178 (300.9151, -1.7892)
  point P179 (303.1387, -1.575)
  point P180 (305.23, -1.3728)
  point P181 (307.1866, -1.1823)
  point P182 (309.007, -1.0041)
  point P183 (310.6885, -0.8385)
  point P184 (312.2302, -0.6861)
  point P185 (313.6297, -0.5472)
  point P186 (314.8861, -0.4221)
  point P187 (315.9976, -0.3108)
  point P188 (316.9636, -0.2139)
  point P189 (317.7826, -0.1314)
  point P190 (318.4537, -0.0636)
  point P191 (318.9766, -0.0108)
  point P192 (319.3503, 0.027)
  point P193 (319.5743, 0.0498)
  point P194 (28.0055, 1.0054)
  point P195 (108.6496, 18.5678)
  point P196 (108.6496, -9.4322)
  point P197 (195.6498, 0.3678)
  point P198 (195.6498, 8.7678)
  point P199 (108.6496, 4.5678)
  dimension "d2" = 300.0001
  dimension "d22" = 100
  dimension "d23" = 7
  dimension "d24" = 5
  dimension "d25" = 5
  dimension "d30" = 28
  dimension "d31" = 8.4
  dimension "d34" = 2
  dimension "d37" = 23.135
  dimension "d43" = 63.4325
  dimension "d44" = 12.5
  dimension "d45" = 110
extrude "Extrusion6" add sketch "Sketch2" along normal blind 77 contours S0 A6
properties part number "3P.05.02.JS.trailing edge 77mm_CPY" material "Polyurethane Foam"
